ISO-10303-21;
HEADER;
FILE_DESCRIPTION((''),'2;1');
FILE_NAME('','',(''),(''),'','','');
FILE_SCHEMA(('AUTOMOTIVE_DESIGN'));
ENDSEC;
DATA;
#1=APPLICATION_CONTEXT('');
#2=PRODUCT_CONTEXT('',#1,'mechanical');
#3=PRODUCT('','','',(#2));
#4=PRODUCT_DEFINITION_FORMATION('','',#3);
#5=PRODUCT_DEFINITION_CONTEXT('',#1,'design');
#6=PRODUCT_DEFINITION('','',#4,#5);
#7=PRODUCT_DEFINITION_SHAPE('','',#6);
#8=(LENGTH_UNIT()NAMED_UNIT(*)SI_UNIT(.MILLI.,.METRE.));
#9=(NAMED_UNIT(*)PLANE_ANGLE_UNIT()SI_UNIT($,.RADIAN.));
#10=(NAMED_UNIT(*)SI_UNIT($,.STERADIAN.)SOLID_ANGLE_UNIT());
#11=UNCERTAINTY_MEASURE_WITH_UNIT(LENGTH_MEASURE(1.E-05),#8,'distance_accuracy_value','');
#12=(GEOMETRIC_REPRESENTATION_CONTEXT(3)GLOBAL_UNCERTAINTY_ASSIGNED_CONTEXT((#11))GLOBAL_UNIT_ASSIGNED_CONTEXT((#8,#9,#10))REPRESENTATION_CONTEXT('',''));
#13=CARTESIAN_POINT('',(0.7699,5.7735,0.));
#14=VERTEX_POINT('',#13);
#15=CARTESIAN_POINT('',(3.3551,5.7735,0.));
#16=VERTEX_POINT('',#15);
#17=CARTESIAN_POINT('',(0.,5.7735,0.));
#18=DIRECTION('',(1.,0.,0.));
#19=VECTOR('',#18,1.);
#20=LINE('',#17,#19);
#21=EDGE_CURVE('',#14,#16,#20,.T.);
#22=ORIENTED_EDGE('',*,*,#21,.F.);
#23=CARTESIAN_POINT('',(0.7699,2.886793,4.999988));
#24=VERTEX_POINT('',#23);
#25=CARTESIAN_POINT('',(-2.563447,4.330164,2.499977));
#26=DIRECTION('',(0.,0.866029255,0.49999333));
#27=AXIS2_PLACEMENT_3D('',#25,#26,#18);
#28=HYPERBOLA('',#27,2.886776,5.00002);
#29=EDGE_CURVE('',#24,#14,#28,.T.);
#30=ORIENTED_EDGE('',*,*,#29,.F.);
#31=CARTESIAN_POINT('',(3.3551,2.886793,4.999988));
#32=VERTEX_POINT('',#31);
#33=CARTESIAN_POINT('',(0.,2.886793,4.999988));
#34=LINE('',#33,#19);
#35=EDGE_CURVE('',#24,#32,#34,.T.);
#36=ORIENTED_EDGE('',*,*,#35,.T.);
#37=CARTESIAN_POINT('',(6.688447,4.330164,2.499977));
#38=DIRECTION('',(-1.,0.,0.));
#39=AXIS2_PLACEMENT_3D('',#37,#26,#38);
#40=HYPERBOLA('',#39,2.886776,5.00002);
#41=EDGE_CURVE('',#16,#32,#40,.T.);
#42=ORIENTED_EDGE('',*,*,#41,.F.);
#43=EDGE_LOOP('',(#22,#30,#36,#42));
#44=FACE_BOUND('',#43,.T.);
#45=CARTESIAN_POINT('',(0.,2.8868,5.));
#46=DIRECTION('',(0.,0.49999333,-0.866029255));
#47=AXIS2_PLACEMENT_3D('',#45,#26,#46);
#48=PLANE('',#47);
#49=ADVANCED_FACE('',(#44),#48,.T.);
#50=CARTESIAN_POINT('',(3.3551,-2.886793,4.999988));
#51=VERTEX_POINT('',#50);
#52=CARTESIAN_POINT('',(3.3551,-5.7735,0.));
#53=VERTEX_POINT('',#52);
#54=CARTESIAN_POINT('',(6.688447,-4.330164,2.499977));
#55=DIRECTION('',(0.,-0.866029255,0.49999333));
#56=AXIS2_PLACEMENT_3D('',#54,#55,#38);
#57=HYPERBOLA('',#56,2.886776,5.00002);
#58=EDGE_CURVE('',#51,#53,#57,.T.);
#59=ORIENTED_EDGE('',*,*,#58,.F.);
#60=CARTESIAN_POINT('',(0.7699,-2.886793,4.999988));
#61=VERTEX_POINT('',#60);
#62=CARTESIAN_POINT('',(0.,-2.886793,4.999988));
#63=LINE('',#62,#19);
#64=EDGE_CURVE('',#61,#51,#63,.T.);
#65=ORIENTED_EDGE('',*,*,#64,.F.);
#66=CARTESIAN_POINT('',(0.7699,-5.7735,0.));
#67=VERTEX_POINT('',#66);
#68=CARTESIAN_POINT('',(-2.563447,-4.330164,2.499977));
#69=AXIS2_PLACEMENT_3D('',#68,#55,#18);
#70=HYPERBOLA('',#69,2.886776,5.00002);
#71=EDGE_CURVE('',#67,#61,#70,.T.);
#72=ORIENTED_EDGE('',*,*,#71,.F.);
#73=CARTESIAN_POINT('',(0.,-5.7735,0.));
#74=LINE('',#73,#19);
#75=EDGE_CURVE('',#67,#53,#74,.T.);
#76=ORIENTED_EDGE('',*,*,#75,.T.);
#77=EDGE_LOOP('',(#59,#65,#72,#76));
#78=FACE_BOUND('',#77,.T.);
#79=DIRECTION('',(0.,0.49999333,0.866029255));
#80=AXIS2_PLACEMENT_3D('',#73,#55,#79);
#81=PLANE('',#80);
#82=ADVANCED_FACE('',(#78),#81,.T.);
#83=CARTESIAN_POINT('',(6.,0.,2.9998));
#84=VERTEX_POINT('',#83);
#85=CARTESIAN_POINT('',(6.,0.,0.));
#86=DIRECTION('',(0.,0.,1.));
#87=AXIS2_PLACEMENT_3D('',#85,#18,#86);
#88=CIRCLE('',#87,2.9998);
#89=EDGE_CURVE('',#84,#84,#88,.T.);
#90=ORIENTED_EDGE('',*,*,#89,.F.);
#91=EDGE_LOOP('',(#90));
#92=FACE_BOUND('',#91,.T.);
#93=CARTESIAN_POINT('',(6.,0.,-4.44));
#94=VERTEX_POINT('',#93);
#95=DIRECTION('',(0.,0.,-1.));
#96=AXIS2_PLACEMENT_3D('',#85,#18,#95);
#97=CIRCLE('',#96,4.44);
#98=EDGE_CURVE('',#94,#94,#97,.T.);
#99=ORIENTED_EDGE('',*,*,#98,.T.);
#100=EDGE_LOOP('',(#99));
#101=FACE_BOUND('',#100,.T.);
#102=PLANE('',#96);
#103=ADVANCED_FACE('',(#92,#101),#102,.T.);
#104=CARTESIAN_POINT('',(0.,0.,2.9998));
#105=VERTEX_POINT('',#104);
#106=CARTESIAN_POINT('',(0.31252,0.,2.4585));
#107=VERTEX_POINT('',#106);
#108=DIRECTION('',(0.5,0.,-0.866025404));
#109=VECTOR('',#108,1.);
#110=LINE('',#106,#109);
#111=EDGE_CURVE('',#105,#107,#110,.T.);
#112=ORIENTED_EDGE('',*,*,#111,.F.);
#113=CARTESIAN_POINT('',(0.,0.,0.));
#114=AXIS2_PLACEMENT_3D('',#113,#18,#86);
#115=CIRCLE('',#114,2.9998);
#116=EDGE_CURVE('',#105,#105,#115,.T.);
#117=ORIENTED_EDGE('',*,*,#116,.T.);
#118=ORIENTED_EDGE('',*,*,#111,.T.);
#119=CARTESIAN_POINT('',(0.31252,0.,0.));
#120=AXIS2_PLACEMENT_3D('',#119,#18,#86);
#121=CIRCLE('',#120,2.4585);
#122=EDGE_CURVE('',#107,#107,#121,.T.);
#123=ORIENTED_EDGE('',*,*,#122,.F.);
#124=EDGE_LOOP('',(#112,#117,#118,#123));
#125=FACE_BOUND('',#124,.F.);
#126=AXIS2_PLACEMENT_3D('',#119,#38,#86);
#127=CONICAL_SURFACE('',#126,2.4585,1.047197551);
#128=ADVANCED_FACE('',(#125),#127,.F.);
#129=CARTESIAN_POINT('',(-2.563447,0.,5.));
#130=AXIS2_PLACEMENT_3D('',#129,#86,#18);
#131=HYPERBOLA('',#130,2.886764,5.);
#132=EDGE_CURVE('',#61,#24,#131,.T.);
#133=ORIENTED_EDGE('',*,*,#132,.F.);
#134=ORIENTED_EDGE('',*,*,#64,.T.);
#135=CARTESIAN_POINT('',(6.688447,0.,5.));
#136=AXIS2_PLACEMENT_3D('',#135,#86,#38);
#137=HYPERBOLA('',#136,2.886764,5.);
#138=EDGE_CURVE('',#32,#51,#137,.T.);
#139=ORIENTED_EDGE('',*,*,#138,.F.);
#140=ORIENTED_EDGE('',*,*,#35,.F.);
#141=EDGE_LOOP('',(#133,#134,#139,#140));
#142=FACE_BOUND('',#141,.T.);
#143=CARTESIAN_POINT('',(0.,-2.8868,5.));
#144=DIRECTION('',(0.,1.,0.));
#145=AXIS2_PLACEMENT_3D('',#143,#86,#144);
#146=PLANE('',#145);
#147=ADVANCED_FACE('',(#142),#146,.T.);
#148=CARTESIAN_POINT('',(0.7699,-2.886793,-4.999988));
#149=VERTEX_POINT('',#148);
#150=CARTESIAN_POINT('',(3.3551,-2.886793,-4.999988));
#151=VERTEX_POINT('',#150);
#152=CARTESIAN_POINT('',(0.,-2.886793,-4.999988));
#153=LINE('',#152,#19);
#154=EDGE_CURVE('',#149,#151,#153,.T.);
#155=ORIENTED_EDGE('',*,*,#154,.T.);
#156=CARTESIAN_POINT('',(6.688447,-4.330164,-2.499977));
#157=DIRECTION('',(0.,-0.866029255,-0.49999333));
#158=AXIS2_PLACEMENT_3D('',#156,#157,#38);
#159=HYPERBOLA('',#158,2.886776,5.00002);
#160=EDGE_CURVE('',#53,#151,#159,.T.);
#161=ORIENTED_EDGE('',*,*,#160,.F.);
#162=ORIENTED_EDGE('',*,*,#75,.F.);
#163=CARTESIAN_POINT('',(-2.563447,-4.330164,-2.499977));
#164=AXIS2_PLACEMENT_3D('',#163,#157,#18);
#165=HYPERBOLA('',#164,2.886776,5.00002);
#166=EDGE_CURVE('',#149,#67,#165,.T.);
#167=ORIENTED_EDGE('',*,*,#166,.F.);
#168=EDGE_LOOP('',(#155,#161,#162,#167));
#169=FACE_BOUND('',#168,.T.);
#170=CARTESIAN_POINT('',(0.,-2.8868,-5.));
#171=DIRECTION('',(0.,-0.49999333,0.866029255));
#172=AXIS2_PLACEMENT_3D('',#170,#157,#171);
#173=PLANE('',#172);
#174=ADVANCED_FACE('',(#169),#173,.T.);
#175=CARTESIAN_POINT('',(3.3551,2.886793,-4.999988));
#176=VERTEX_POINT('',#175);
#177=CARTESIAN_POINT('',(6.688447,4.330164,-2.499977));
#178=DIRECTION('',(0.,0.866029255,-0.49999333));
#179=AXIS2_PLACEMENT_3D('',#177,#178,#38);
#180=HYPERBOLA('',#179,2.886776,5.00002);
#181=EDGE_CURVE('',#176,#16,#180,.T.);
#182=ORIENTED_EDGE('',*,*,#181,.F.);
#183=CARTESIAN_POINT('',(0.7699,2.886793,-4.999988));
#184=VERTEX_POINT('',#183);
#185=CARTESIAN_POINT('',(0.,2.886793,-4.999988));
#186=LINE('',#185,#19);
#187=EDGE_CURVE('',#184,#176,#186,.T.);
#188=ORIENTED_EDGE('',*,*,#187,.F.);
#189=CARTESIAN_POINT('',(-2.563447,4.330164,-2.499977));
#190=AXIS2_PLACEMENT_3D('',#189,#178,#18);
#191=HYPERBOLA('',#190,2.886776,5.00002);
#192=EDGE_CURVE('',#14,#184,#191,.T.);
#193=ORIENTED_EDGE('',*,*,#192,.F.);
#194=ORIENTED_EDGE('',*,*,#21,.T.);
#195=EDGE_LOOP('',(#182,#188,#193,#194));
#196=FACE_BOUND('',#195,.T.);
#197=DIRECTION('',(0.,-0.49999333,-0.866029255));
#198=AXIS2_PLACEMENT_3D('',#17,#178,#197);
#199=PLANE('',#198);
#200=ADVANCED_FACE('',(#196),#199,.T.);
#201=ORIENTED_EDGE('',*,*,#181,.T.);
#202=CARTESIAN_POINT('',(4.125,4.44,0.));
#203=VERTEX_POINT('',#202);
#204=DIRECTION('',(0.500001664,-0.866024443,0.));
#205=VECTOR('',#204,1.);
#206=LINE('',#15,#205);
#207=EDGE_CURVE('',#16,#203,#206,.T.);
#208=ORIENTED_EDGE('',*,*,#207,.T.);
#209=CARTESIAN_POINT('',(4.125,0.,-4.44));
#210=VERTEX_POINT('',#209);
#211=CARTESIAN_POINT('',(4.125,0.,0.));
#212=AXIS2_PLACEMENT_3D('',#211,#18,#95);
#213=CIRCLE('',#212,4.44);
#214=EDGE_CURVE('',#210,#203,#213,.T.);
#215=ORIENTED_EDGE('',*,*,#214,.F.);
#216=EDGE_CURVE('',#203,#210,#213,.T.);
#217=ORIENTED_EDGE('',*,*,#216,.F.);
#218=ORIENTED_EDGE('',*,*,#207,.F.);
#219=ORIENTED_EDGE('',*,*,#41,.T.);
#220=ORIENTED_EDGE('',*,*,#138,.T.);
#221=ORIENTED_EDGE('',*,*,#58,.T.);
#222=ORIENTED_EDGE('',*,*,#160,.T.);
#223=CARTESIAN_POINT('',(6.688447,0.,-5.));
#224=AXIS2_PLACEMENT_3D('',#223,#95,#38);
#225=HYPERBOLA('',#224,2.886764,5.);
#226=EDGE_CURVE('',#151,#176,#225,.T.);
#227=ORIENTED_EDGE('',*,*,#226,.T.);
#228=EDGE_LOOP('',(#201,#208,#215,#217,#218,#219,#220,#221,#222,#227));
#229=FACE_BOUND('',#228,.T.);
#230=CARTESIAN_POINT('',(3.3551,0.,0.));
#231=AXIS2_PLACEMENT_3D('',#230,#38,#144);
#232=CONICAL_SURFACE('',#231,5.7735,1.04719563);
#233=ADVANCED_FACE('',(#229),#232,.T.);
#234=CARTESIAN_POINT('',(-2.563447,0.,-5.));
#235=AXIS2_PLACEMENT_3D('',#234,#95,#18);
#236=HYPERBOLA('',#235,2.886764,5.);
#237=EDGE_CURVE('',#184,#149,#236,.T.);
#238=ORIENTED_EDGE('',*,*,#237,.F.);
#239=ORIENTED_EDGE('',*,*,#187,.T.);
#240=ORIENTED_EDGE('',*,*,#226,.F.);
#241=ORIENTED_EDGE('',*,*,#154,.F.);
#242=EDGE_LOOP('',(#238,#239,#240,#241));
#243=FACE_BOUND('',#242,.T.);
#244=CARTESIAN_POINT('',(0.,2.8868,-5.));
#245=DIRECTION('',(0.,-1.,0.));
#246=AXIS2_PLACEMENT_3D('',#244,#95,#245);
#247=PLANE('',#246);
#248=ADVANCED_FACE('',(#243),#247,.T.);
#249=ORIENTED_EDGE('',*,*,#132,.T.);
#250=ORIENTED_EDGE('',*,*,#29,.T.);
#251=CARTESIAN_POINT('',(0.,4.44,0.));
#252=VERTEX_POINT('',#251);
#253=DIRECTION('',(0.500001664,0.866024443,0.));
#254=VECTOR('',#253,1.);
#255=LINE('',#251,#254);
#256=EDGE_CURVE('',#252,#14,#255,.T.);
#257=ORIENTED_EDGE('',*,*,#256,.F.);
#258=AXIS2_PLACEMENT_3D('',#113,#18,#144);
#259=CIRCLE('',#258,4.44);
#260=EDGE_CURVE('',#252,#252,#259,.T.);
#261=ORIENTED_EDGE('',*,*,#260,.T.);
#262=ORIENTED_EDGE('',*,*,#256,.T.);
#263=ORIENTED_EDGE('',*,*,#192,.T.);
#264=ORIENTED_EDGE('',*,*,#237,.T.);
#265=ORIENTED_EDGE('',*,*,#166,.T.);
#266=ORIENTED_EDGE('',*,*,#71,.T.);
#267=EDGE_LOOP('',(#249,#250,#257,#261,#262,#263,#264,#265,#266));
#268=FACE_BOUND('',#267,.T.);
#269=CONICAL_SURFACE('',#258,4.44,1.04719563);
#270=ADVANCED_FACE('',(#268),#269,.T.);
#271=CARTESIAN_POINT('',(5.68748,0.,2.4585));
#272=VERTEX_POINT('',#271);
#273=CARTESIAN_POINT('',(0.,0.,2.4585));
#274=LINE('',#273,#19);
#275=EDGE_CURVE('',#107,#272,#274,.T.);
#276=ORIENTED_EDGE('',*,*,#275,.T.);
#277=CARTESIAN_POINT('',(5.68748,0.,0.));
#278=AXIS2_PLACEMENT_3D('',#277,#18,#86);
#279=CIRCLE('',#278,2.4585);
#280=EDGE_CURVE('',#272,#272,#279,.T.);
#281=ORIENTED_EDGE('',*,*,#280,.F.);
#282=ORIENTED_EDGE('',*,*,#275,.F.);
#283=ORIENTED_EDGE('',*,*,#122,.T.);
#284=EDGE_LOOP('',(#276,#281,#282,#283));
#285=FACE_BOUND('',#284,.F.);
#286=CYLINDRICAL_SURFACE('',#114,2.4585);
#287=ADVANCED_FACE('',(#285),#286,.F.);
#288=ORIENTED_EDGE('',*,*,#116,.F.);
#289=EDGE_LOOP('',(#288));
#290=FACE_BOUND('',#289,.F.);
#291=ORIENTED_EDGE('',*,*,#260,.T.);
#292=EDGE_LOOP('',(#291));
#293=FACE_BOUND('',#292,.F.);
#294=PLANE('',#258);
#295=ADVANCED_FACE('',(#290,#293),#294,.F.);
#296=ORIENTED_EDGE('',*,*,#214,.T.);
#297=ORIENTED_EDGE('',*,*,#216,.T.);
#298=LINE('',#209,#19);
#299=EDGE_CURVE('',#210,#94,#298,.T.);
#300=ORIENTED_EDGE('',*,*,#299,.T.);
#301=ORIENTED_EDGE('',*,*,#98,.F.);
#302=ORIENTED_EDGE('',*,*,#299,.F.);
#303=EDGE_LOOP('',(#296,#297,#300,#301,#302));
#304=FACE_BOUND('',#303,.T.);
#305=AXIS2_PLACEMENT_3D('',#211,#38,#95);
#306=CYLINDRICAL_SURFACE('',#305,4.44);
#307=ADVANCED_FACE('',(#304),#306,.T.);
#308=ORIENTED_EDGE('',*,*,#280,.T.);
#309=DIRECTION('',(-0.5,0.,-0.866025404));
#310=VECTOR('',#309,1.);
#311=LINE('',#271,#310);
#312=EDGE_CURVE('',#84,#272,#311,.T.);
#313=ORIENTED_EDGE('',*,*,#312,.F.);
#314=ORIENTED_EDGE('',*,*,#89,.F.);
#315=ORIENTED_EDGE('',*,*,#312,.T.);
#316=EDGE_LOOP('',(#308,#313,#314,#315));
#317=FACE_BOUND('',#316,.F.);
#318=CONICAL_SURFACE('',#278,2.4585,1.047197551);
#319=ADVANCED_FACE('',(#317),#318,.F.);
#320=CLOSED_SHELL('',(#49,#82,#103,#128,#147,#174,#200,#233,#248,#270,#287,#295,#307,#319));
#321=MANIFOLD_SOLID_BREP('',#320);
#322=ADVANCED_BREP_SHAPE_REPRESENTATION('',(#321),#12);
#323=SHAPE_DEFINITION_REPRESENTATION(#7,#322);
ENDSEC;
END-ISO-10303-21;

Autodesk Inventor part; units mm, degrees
ref_plane "YZ Plane" through (0, 0, 0) normal (1, 0, 0) x (0, 1, 0)
ref_plane "XZ Plane" through (0, 0, 0) normal (0, 1, 0) x (-1, 0, 0)
sketch "Sketch1" plane through (0, 0, 0) normal (1, 0, 0) x (0, 1, 0)
  line L0 (2.8868, -5) -> (-2.8868, -5)
  line L1 (-2.8868, -5) -> (-5.7735, 0)
  line L2 (-5.7735, 0) -> (-2.8868, 5)
  line L3 (-2.8868, 5) -> (2.8868, 5)
  line L4 (2.8868, 5) -> (5.7735, 0)
  line L5 (5.7735, 0) -> (2.8868, -5)
  point P0 (0, 0)
  point P1 (0, 0)
  dimension "d0" = 11.547
extrude "Body" add sketch "Sketch1" along normal blind 4.125
sketch "Sketch2" plane through (4.125, 0, 0) normal (1, 0, 0) x (0, 0, -1)
  circle A0 centre (0, 0) radius 4.44
  dimension "d7" = 8.88
extrude "Ring" add sketch "Sketch2" along normal blind 1.875
sketch "Sketch3" plane through (0, 0, 0) normal (0, 0, 1) x (1, 0, 0)
  line L0 (0, 2.8868) -> (0, 5.7735) projected
  line L1 (0, 5.7735) -> (4.125, 5.7735) projected
  line L2 (4.125, 2.8868) -> (4.125, 5.7735) projected
  line L3 (-0.825, 0) -> (4.95, 0) projected
  line L4 (0, 4.44) -> (0.7699, 5.7735)
  line L5 (3.3551, 5.7735) -> (4.125, 4.44)
  dimension "d3" = 30
  dimension "d4" = 30
  dimension "d5" = 8.88
  dimension "d6" = 8.88
revolve "Chamfer1" cut sketch "Sketch3" angle 360 about axis through (-10, 0, 0) along (1, 0, 0)
sketch "Sketch4" plane through (0, 0, 0) normal (-1, 0, 0) x (0, 0, 1)
  line L0 (0, -8.0829) -> (0, 8.0829) projected
  line L1 (-7, 0) -> (7, 0) projected
  point P0 (0, 0)
hole "Thread" at (0, 0, 0) direction (1, 0, 0) diameter 4.917 end through all thread size "M6x1" class "6H" standard "ISO Metric profile"
chamfer "Chamfer2" distance 0.5413 angle 30 1 edges at (0, 0, -2.4585) measured on face at (0, 3.7305, -0.453)
chamfer "Chamfer3" distance 0.5413 angle 30 1 edges at (6, 0, -2.4585) measured on face at (6, -0.5503, -3.7127)
ref_plane "Work Plane1" through (16.4347, 0, 0) normal (0, 0, 1) x (-1, 0, 0)
equation "\"d0\" = 1.1547 * SW"
equation "\"d1\" = KOH1"
equation "\"d7\" = SD2"
equation "\"d8\" = KOH - KOH1"
equation "\"d3\" = ANG1"
equation "\"d4\" = ANG2"
equation "\"d5\" = SW0"
equation "\"d6\" = SW01"
equation "\"d10\" = -0.5 * GD1 + 0.5 * NND"
equation "\"d46\" = -0.5 * GD1 + 0.5 * NND"
equation "\"d12\" = -0.5 * GD1 + 0.5 * NND"
equation "\"d47\" = -0.5 * GD1 + 0.5 * NND"
equation "\"ANG1\" = 30deg"
equation "\"ANG2\" = 30deg"
equation "\"NND\" = 6"
equation "\"KOH1\" = 4.125"
equation "\"KOH\" = 6"
equation "\"SW0\" = 8.88"
equation "\"SW01\" = SW0"
equation "\"SD2\" = SW0"
equation "\"GUL\" = 0.541266 * PTC"
equation "\"THREADDIA\" = 6"
equation "\"TOA\" = 30deg"
equation "\"PTC\" = 1"
equation "\"KOH1MIN\" = 3.3"
equation "\"E0\" = 1.155 * SW"
equation "\"GAL\" = 0.541266 * PTC"
equation "\"SW\" = 10"
equation "\"GD1\" = 4.917468"
properties part number "ISO 7042 - M6" material "Steel"
